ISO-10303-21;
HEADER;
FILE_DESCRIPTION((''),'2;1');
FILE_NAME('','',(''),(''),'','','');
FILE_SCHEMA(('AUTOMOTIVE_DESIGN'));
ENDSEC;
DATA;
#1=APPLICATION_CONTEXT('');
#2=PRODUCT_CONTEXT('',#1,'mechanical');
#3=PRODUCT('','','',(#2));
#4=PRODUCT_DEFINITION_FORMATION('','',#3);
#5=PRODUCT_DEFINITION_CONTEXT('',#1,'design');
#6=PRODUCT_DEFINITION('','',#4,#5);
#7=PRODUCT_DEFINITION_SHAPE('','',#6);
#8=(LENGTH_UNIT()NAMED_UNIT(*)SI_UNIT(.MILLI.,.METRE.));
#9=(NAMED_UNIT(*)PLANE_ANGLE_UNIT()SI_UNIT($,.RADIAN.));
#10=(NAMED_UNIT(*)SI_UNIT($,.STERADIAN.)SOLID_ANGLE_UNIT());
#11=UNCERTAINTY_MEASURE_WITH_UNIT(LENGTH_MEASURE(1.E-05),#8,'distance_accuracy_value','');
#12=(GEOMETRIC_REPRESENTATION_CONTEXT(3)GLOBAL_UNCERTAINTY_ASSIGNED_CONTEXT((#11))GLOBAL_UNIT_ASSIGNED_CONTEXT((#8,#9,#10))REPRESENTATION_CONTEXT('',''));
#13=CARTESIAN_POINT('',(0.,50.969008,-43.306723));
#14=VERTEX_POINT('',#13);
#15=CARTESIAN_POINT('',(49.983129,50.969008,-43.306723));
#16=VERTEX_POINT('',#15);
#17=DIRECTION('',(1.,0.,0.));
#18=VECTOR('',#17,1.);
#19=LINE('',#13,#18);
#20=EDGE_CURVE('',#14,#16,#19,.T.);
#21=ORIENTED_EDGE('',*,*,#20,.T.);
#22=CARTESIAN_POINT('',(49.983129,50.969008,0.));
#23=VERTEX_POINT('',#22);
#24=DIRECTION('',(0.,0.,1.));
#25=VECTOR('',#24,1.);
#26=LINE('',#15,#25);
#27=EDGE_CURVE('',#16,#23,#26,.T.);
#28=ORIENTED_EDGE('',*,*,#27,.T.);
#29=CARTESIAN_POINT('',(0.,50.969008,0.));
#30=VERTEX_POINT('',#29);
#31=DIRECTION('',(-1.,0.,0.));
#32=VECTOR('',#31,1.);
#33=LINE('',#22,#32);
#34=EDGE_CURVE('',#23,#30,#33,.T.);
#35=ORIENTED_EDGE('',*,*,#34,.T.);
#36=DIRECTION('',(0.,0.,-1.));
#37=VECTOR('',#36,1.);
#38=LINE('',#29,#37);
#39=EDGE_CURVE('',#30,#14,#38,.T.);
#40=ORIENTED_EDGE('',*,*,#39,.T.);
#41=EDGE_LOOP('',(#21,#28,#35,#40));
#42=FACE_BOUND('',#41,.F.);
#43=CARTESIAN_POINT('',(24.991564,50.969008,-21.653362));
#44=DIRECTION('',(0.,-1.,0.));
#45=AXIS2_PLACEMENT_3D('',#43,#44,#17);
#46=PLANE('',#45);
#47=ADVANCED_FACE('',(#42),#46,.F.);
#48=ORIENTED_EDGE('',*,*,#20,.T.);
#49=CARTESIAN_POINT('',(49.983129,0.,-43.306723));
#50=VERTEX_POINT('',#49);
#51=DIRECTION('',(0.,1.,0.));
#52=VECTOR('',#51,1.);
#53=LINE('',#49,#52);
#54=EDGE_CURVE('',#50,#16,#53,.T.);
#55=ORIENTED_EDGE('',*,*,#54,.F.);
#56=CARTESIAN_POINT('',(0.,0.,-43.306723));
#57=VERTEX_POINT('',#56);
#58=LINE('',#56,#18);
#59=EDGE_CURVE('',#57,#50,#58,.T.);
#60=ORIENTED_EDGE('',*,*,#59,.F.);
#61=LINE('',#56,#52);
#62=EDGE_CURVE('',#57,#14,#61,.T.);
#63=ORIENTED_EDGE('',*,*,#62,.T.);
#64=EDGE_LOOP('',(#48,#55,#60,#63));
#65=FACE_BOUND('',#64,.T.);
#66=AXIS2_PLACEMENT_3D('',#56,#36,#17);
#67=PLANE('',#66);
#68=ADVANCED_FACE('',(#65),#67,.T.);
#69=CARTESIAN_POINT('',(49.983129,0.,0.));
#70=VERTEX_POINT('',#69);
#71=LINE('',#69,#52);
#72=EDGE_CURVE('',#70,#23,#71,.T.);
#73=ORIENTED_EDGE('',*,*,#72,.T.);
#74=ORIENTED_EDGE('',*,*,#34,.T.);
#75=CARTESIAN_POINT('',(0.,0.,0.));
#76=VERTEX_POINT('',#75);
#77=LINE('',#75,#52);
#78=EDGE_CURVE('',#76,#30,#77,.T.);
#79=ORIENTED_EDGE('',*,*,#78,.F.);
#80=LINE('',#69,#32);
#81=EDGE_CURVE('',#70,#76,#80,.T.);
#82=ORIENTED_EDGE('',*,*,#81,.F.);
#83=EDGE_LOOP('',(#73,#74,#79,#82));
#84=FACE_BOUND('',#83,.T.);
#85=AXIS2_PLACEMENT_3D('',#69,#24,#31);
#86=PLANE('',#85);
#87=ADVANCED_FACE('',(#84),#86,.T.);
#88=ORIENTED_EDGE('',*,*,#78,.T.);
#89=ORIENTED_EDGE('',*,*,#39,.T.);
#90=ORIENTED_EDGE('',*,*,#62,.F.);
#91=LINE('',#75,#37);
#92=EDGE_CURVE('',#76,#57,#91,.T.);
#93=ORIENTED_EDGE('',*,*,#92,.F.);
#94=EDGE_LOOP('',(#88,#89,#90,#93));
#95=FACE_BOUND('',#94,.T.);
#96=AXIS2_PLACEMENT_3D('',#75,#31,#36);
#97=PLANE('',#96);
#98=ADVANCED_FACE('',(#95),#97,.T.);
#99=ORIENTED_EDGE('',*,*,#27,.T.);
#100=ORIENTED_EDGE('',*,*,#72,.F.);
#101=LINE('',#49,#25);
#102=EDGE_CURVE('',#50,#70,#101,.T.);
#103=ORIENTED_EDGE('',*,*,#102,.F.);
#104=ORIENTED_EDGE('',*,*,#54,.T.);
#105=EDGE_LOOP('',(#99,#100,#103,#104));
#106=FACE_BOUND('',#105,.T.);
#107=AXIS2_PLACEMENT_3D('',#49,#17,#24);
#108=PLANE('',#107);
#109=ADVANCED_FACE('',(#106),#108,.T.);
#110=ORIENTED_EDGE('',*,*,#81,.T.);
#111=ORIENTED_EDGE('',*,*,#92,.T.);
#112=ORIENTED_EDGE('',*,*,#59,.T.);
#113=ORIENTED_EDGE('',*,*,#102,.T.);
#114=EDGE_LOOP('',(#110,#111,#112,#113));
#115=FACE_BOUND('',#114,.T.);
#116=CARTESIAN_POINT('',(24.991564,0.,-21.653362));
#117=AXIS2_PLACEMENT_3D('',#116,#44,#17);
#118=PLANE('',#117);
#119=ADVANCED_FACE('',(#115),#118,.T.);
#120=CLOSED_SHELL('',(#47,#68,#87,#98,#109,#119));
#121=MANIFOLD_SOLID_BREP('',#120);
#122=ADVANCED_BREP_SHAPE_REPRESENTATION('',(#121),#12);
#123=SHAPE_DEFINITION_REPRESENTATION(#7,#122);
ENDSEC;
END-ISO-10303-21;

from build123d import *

# Parameters (mm, degrees)
F1_DEPTH = 50.9690083563


# Not quite as in the source:
# - the program builds the solid bodies; features that only make, move or delete a surface that nothing else refers to are left out


with BuildPart() as f1:
    # F0 (on Front) → F1 (new body)
    with BuildSketch(Plane.XZ):
        Polygon((49.9831289053, 0), (0, 0), (0, -43.306723237), (49.9831289053, -43.306723237), (49.9831289053, -21.6533616185), (49.9831289053, -6.6764801741), align=None)
    extrude(amount=-F1_DEPTH)


solid = f1.part
